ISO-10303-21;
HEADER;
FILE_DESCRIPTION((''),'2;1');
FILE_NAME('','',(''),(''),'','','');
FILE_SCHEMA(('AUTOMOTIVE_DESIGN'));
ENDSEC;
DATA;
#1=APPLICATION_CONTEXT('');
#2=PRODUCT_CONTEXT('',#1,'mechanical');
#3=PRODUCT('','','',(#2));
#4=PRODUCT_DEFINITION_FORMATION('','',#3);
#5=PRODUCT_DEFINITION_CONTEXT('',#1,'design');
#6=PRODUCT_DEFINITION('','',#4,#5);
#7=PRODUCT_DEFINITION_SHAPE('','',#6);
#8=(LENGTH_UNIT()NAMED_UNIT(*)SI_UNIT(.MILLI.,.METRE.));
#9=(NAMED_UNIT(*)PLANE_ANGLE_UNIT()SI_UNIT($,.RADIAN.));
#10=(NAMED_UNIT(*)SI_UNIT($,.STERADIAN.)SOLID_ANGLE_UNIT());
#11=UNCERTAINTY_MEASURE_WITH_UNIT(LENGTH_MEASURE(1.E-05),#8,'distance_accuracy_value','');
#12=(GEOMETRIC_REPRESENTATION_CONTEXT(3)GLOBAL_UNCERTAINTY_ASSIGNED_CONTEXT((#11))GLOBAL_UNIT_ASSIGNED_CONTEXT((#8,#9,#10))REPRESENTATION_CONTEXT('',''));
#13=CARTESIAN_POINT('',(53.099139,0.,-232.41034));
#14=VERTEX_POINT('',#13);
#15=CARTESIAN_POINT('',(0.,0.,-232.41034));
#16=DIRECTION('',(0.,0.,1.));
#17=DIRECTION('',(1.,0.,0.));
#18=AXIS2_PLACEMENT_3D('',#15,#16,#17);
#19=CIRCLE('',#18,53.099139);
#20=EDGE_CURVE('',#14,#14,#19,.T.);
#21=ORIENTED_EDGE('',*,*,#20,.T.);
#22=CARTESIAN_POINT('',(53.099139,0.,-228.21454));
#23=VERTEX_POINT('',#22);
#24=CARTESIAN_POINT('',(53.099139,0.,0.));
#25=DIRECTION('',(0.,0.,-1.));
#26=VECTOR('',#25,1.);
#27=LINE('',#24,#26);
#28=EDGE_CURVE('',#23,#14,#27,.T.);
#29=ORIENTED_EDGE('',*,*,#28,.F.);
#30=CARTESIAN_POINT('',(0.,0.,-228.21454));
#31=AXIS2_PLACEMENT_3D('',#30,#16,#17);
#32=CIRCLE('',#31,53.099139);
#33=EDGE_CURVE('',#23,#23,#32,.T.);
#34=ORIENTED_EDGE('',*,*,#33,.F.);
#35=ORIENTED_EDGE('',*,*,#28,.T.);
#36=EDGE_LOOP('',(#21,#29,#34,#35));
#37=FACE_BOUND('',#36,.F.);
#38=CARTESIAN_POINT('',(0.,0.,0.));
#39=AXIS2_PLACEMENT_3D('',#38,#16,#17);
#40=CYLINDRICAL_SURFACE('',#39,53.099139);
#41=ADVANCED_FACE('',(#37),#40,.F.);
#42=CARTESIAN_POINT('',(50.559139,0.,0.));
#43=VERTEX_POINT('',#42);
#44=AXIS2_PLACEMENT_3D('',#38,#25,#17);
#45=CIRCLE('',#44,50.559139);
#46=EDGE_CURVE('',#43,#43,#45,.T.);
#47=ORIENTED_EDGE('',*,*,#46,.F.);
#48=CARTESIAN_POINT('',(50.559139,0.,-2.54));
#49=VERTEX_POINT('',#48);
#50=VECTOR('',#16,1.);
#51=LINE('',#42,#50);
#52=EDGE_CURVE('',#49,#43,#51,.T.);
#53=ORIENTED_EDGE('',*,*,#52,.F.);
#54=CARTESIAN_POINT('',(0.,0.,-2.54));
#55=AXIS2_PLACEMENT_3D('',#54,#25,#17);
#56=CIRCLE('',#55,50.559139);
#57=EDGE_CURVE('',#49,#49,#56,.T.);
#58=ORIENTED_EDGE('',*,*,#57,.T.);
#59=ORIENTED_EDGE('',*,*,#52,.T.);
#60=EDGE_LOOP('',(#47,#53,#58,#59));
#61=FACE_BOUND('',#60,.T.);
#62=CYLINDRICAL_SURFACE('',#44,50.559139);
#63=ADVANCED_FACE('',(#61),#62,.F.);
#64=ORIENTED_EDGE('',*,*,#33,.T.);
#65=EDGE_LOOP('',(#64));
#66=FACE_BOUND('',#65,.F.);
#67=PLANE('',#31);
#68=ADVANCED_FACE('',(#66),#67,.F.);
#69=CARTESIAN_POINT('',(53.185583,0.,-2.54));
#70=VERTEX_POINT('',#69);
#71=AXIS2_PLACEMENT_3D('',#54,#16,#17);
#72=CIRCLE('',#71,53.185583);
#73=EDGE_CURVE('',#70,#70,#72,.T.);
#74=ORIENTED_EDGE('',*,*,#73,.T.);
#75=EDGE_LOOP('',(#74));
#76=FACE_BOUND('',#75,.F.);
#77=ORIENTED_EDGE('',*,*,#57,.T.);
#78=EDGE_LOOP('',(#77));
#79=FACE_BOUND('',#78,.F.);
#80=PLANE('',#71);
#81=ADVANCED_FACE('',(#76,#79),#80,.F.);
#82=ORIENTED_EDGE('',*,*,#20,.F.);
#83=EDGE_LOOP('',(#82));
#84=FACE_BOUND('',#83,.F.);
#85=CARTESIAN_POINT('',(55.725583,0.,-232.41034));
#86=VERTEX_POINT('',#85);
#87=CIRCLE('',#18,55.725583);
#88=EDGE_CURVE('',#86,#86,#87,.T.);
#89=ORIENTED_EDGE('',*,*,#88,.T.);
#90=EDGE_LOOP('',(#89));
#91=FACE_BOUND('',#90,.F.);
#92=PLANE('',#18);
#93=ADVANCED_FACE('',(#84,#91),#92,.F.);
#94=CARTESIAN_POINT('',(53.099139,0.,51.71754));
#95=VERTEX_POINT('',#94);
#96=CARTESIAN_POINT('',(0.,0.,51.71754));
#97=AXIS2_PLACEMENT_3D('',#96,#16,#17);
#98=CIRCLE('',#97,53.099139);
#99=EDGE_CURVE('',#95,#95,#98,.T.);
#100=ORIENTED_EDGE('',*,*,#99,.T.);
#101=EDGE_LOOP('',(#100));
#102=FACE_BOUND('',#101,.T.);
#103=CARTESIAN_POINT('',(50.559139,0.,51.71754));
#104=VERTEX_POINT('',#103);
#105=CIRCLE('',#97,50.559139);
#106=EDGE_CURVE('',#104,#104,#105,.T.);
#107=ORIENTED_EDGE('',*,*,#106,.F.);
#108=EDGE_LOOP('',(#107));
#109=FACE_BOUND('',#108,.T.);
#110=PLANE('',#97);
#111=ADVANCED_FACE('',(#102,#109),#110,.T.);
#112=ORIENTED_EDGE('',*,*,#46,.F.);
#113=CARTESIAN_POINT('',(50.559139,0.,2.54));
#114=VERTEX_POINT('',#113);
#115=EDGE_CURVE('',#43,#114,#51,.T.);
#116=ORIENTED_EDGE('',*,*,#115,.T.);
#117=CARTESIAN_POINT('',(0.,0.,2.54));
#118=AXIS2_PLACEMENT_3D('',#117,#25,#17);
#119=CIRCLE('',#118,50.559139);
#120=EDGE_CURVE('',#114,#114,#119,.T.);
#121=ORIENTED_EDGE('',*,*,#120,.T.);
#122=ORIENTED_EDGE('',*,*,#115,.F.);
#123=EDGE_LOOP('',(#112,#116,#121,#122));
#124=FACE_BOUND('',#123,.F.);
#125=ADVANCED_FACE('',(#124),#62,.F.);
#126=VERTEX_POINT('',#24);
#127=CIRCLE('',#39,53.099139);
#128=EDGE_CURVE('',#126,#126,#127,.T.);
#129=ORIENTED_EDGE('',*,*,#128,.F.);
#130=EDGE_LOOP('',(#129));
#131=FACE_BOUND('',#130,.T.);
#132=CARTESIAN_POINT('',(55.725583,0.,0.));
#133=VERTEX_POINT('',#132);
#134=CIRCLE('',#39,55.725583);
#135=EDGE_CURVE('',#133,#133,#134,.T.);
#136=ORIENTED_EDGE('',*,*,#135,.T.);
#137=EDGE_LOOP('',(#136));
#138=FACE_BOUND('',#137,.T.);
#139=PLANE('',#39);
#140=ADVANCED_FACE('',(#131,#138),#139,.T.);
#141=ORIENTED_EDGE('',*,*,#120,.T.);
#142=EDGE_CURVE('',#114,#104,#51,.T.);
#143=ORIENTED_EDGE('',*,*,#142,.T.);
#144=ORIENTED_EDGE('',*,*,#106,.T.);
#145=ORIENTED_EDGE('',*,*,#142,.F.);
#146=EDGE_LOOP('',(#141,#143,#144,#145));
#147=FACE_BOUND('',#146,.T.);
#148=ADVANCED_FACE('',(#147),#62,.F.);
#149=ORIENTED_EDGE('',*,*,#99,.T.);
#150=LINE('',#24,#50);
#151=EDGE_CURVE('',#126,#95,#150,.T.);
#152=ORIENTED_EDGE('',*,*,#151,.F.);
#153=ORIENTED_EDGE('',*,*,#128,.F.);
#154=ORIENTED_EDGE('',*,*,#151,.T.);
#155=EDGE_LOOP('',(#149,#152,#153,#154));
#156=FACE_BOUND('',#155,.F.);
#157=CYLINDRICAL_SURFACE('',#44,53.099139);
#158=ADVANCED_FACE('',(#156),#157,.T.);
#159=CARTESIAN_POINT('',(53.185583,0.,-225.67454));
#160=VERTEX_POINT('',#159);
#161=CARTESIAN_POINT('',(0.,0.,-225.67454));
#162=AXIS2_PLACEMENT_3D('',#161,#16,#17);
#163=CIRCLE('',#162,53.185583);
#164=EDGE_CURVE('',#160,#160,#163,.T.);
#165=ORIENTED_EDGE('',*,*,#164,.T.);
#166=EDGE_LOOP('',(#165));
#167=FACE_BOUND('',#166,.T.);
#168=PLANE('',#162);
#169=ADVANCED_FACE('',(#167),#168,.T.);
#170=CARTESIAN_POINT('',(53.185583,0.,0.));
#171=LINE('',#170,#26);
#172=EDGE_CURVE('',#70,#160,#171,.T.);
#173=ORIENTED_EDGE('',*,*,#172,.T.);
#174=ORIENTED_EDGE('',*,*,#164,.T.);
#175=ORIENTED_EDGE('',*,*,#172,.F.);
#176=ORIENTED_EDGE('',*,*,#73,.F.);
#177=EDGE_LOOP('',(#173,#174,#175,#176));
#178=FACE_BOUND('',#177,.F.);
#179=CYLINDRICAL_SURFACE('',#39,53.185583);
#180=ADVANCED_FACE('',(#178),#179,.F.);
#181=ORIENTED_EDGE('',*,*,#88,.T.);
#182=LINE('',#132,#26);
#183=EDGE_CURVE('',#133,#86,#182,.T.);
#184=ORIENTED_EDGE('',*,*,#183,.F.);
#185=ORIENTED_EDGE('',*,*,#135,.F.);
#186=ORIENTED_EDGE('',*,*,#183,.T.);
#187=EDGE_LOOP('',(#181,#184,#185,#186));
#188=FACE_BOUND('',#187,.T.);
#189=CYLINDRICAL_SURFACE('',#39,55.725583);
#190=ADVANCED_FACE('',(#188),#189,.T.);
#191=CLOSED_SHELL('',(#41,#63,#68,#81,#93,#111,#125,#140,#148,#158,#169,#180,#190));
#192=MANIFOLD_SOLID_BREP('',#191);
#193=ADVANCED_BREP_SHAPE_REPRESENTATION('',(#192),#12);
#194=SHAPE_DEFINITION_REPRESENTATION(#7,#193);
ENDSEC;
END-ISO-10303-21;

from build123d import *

# Parameters (mm, degrees)
F0_R     = 53.0991394176
F1_DEPTH = 51.71754
F0_R_2   = 55.7255834594
F2_DEPTH = 232.41034
F3_T     = -2.54
F4_DEPTH = 228.21454
F5_T     = -2.54


# Not quite as in the source:
# - a shell that OpenCascade refuses in one call is made with other operations: the cavity is built on its own and cut out


with BuildPart() as f1:
    # F0 (on Top) → F1 (new body)
    with BuildSketch(Plane.XY):
        Circle(F0_R)
    extrude(amount=F1_DEPTH)

    # F3
    f3_openings = [f1.faces().sort_by_distance(p)[0] for p in [
        (0, 0, 51.71754),
    ]]
    offset(amount=F3_T, openings=f3_openings)

    # F4 (add): a face of the model
    f4_faces = [f1.faces().sort_by_distance(p)[0] for p in [
        (0, 0, 0),
    ]]


with BuildPart() as f2:
    # F0 (on Top) → F2 (new body)
    with BuildSketch(Plane.XY):
        Circle(F0_R_2)
        Circle(F0_R, mode=Mode.SUBTRACT)
    extrude(amount=-F2_DEPTH)


with BuildPart() as f1_1:
    add(f1.part)

    add(f2.part)  # F4 merges F2
    extrude(f4_faces, amount=F4_DEPTH)

    # F5: a shell. OpenCascade refuses it in one call, so the cavity is built on its own and cut out:
    # the body offset inwards by the wall thickness, plus a prism from it out through each open face.
    f5_core = offset(f1_1.part, amount=F5_T, kind=Kind.INTERSECTION, mode=Mode.PRIVATE)
    f5_exits = [f5_core.faces().sort_by_distance(p)[0] for p in [
        (0, 0, 0),
    ]]
    add(f5_core, mode=Mode.SUBTRACT)
    extrude(f5_exits, amount=-F5_T, mode=Mode.SUBTRACT)


solid = f1_1.part
